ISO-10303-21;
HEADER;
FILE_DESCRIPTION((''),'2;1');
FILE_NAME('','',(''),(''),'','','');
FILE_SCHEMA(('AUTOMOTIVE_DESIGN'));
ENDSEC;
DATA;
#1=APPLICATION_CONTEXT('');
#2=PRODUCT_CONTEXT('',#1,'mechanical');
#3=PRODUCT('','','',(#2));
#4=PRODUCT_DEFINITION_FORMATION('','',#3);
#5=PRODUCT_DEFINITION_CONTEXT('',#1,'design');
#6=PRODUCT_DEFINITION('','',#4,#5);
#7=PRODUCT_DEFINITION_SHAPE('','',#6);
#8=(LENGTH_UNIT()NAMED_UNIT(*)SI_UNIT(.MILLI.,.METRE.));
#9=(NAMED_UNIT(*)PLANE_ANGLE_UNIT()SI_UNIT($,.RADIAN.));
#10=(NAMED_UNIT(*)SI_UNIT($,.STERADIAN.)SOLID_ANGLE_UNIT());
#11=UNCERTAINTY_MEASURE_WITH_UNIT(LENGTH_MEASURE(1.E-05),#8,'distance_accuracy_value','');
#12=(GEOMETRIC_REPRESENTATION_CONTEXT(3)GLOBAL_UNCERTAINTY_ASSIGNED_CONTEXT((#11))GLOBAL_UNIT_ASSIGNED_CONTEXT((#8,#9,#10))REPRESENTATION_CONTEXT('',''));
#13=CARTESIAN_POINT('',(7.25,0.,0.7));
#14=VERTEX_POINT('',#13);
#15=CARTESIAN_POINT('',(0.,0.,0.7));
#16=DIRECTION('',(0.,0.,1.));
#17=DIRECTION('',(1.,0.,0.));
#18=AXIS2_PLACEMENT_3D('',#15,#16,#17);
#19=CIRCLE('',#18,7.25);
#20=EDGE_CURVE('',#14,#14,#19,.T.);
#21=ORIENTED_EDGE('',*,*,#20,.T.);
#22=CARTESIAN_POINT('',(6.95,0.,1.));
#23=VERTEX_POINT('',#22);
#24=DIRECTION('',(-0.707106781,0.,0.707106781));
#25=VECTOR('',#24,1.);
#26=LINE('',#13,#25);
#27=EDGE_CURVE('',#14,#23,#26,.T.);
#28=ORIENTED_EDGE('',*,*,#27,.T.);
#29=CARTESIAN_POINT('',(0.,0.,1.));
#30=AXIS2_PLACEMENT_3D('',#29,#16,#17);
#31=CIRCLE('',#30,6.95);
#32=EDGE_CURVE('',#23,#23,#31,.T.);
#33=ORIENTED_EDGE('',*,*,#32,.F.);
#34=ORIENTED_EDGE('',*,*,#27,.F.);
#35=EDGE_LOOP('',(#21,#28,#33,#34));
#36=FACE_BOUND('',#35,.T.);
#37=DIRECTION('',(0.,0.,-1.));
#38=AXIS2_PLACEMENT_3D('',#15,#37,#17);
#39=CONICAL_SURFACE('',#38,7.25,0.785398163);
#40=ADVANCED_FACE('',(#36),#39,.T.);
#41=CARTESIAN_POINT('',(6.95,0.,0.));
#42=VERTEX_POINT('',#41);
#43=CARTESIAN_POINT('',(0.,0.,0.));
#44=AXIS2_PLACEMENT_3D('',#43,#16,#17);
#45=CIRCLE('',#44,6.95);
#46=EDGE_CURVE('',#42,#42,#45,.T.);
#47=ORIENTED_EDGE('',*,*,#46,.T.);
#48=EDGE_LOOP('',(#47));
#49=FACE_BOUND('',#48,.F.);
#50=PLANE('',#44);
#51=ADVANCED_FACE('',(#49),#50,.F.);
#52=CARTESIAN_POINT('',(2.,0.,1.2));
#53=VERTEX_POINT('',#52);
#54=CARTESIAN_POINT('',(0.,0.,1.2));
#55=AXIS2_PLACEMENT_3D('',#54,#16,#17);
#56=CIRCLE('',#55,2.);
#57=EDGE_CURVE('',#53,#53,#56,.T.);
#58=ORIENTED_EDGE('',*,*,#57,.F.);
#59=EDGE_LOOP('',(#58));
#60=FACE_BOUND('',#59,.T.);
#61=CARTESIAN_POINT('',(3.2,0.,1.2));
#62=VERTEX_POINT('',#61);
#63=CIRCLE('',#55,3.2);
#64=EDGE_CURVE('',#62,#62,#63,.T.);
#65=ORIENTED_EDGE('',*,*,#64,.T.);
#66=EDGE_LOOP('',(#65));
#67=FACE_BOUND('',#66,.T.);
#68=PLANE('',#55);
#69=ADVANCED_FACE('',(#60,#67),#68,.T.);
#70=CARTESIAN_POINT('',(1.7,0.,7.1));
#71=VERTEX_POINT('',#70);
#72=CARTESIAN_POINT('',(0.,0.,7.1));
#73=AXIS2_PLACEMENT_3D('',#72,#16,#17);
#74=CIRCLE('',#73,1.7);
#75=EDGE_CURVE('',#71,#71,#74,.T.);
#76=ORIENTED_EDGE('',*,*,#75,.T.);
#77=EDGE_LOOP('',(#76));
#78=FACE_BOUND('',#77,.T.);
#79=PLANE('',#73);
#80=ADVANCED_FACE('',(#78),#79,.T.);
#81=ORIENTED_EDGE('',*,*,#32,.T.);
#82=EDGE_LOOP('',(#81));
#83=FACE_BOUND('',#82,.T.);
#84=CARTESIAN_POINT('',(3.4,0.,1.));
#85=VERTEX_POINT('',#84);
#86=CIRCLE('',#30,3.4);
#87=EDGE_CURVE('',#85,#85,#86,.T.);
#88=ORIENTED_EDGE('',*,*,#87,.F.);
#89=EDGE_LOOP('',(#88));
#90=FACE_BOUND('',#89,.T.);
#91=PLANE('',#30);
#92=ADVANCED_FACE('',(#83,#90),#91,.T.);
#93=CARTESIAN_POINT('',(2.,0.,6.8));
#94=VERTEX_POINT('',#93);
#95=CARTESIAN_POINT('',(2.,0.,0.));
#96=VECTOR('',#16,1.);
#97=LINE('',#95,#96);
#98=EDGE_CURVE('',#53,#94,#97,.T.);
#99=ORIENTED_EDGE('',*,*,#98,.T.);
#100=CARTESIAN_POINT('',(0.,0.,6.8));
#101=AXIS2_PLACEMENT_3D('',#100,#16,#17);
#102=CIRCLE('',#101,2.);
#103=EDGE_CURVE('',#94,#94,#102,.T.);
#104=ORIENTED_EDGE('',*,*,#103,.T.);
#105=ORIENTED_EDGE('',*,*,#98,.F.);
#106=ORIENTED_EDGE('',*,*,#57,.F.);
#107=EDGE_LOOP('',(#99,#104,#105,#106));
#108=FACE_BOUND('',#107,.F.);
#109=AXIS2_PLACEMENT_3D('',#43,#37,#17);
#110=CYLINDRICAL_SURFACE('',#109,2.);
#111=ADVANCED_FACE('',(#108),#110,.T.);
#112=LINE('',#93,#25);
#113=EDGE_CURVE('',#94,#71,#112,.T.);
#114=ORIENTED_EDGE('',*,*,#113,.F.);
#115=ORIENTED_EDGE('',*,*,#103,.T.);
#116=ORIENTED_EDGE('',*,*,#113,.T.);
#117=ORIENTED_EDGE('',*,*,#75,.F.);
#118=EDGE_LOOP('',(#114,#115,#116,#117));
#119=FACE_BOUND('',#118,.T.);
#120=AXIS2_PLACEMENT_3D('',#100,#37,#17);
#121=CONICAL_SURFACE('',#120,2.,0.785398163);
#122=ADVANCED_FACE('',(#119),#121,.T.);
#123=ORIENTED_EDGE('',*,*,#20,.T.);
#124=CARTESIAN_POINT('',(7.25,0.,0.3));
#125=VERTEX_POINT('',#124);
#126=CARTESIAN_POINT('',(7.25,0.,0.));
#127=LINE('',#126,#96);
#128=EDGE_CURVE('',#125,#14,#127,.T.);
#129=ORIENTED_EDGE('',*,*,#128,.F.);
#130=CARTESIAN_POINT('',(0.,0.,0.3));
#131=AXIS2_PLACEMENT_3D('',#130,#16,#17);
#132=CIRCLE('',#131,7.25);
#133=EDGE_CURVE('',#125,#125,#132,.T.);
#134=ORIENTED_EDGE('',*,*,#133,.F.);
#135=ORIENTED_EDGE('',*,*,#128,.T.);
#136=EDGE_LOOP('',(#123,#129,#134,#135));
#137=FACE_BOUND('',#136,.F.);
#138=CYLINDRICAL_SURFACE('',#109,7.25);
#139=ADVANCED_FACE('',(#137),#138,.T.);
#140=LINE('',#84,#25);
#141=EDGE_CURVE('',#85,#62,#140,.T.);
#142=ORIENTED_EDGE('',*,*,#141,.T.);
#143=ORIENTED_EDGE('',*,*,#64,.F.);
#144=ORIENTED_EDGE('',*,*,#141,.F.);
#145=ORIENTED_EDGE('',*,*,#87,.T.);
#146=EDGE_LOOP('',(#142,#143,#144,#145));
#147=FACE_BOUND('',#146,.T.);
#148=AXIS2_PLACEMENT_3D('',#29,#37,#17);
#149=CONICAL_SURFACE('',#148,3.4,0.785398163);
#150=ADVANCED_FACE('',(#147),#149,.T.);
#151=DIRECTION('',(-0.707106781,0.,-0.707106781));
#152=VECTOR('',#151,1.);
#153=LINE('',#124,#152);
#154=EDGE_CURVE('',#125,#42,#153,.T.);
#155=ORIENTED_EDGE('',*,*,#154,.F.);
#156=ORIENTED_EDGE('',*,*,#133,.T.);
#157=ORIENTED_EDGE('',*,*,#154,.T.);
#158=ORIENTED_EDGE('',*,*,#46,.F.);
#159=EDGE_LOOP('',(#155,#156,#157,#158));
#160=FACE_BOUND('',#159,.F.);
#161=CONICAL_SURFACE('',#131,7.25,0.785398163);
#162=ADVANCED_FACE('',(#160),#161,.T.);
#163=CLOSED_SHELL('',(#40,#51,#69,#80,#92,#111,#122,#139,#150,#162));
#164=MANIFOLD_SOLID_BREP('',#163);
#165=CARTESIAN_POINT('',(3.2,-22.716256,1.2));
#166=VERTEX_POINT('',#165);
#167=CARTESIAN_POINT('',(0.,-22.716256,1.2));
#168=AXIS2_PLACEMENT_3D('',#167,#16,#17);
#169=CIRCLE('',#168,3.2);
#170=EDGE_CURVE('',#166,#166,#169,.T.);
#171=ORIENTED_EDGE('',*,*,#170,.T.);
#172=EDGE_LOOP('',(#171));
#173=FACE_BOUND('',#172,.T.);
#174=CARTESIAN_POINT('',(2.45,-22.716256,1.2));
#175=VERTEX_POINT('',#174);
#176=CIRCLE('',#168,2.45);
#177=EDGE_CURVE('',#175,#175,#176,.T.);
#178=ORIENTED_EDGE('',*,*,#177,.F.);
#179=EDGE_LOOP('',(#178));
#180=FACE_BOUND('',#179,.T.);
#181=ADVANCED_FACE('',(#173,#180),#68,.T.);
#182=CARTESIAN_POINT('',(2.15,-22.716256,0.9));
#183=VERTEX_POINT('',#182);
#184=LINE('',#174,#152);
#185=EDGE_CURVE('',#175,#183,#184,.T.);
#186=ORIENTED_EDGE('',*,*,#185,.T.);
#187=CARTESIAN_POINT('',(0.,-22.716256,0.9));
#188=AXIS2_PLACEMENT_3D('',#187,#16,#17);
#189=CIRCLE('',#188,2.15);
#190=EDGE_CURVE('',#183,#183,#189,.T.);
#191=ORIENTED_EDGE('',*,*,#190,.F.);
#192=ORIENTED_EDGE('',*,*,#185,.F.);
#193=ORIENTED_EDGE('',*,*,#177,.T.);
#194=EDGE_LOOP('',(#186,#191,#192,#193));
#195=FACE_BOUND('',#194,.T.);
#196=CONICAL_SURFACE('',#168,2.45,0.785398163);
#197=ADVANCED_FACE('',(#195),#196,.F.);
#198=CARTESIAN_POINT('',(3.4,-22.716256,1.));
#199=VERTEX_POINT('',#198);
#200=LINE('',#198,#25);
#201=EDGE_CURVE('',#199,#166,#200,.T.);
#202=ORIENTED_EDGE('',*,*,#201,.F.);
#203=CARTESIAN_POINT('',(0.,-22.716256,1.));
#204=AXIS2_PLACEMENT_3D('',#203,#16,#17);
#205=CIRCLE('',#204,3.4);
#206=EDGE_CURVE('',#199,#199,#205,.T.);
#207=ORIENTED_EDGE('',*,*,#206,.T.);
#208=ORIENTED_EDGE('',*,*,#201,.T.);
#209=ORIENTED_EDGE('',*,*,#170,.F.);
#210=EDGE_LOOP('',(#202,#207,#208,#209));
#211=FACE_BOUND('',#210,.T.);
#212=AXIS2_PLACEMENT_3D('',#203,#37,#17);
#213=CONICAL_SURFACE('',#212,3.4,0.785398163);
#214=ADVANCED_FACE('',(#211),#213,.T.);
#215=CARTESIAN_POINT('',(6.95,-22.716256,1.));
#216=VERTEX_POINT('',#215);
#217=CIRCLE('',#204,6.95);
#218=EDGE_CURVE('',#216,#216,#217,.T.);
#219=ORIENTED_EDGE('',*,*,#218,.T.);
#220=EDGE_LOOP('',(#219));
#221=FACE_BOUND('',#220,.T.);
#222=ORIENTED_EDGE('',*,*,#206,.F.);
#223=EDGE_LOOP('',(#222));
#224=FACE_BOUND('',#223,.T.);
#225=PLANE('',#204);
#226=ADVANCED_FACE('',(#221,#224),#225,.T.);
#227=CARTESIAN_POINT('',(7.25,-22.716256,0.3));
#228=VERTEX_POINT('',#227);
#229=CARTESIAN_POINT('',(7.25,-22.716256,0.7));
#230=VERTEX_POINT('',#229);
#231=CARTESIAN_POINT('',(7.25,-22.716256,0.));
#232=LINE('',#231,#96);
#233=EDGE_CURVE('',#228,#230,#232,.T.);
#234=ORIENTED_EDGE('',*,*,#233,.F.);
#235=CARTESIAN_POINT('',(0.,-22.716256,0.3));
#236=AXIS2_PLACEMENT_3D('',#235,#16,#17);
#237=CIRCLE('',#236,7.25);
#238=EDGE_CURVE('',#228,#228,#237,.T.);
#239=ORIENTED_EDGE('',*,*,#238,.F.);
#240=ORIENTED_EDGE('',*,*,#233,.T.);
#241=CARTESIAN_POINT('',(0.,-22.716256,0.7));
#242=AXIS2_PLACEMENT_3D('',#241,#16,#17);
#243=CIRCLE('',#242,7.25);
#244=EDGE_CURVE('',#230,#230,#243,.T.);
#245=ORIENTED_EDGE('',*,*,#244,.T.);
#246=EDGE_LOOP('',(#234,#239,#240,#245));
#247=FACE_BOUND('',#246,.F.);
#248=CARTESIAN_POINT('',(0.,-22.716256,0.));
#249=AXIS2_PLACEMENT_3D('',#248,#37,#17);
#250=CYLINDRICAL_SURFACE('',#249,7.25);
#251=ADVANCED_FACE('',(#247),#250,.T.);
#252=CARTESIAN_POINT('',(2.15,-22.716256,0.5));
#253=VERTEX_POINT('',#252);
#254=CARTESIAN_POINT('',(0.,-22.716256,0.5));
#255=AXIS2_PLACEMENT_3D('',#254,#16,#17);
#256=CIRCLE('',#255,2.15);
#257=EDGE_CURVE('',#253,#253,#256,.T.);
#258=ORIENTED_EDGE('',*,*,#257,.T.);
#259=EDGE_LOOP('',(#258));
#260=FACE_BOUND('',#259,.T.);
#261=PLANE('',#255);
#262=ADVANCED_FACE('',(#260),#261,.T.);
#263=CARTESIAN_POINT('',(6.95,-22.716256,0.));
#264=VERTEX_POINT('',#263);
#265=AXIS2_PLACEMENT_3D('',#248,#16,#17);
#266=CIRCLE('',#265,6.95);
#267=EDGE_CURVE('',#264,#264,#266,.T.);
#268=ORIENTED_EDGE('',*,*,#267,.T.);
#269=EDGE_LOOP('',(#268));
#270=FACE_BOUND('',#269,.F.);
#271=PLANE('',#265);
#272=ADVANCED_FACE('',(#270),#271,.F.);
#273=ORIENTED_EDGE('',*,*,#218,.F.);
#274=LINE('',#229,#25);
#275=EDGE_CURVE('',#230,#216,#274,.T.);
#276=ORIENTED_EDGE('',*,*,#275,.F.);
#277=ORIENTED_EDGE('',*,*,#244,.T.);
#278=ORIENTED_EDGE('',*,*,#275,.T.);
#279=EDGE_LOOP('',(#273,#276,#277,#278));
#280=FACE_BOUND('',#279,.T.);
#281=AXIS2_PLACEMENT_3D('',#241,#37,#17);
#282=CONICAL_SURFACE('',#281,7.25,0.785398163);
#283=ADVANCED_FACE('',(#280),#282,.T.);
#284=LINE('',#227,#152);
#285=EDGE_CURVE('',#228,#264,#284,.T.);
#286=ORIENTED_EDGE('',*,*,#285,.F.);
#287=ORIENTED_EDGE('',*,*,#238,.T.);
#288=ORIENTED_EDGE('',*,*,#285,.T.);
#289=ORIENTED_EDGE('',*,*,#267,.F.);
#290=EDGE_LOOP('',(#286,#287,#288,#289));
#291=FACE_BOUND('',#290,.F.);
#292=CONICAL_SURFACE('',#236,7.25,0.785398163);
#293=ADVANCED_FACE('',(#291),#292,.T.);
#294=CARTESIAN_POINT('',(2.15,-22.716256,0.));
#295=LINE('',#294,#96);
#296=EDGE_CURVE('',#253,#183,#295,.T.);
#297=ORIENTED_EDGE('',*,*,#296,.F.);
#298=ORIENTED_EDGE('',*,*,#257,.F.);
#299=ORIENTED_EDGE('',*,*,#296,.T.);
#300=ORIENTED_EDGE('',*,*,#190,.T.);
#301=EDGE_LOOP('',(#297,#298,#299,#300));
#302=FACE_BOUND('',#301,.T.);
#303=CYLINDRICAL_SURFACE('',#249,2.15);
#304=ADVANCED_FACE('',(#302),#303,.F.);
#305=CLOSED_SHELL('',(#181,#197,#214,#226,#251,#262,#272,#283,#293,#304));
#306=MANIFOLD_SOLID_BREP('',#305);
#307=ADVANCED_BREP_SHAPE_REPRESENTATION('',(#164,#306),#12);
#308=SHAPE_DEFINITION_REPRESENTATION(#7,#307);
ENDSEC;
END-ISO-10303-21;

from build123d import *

# Parameters (mm, degrees)
F0_R     = 7.25
F0_R_2   = 3.1
F1_DEPTH = 1
F0_R_3   = 2
F2_DEPTH = 1.2
F0_R_4   = 2.15
F3_DEPTH = 7.1
F4_DEPTH = 0.5


# Not quite as in the source:
# - a fillet or chamfer that OpenCascade refuses, or shapes differently, is made with other operations: its cross-section is extruded or revolved along the edge and cut away or added


with BuildPart() as f1:
    # F0 (on Top) → F1 (new body)
    with BuildSketch(Plane.XY):
        Circle(F0_R)
        Circle(F0_R_2, mode=Mode.SUBTRACT)
    extrude(amount=F1_DEPTH)

    # F0 (on Top) → F2 (join)
    with BuildSketch(Plane.XY):
        Circle(F0_R_2)
        Circle(F0_R_3, mode=Mode.SUBTRACT)
    extrude(amount=F2_DEPTH)

    # F0 (on Top) → F3 (join)
    with BuildSketch(Plane.XY):
        Circle(F0_R_3)
    extrude(amount=F3_DEPTH)

    # F5#2: chamfer of 0.3 on 4 edges, made by hand


with BuildPart() as f1b:
    # F0 (on Top) → F1, piece 2 (new body)
    with BuildSketch(Plane.XY):
        with Locations((0, -22.7162558585)):
            Circle(F0_R)
        with Locations((0, -22.7162558585)):
            Circle(F0_R_2, mode=Mode.SUBTRACT)
    extrude(amount=F1_DEPTH)

    # F0 (on Top) → F2, piece 2 (join)
    with BuildSketch(Plane.XY):
        with Locations((0, -22.7162558585)):
            Circle(F0_R_2)
        with Locations((0, -22.7162558585)):
            Circle(F0_R_4, mode=Mode.SUBTRACT)
    extrude(amount=F2_DEPTH)

    # F0 (on Top) → F4 (join)
    with BuildSketch(Plane.XY):
        with Locations((0, -22.7162558585)):
            Circle(F0_R_4)
    extrude(amount=F4_DEPTH)

    # F5: chamfer of 0.3 on 4 edges, made by hand


with BuildPart() as f5_tool2:
    # F5_s3 → F5_t4 (revolve)
    with BuildSketch(Plane.XZ.offset(22.7162558585)):
        Polygon((3.4, 1), (3.1, 1.3), (3.1, 1), align=None)
    revolve(axis=Axis((0, -22.7162558585, 1), (0, 0, 1)))

    split(bisect_by=Plane.XY.offset(1.2), keep=Keep.BOTTOM)


with BuildPart() as f1b_1:
    add(f1b.part)

    # F5_t1: union F5_tool2
    add(f5_tool2.part)

    # F5_s6 → F5_t7 (revolve, cut)
    with BuildSketch(Plane.XZ.offset(22.7162558585)):
        Polygon((7.25, 0.3), (6.95, 0), (7.25, 0), align=None)
    revolve(axis=Axis((0, -22.7162558585, 0), (0, 0, 1)), mode=Mode.SUBTRACT)

    # F5_s8 → F5_t9 (revolve, cut)
    with BuildSketch(Plane.XZ.offset(22.7162558585)):
        Polygon((7.25, 0.7), (6.95, 1), (7.25, 1), align=None)
    revolve(axis=Axis((0, -22.7162558585, 1), (0, 0, 1)), mode=Mode.SUBTRACT)

    # F5_s10 → F5_t11 (revolve, cut)
    with BuildSketch(Plane.XZ.offset(22.7162558585)):
        Polygon((2.45, 1.2), (2.15, 0.9), (2.15, 1.2), align=None)
    revolve(axis=Axis((0, -22.7162558585, 1.2), (0, 0, 1)), mode=Mode.SUBTRACT)


with BuildPart() as f5_2_tool2:
    # F5_2_s3 → F5_2_t4 (revolve)
    with BuildSketch(Plane.XZ):
        Polygon((3.4, 1), (3.1, 1.3), (3.1, 1), align=None)
    revolve(axis=Axis((0, 0, 1), (0, 0, 1)))

    split(bisect_by=Plane.XY.offset(1.2), keep=Keep.BOTTOM)


with BuildPart() as f1_1:
    add(f1.part)

    # F5_2_t1: union F5_2_tool2
    add(f5_2_tool2.part)

    # F5_2_s6 → F5_2_t7 (revolve, cut)
    with BuildSketch(Plane.XZ):
        Polygon((7.25, 0.3), (6.95, 0), (7.25, 0), align=None)
    revolve(axis=Axis((0, 0, 0), (0, 0, 1)), mode=Mode.SUBTRACT)

    # F5_2_s8 → F5_2_t9 (revolve, cut)
    with BuildSketch(Plane.XZ):
        Polygon((7.25, 0.7), (6.95, 1), (7.25, 1), align=None)
    revolve(axis=Axis((0, 0, 1), (0, 0, 1)), mode=Mode.SUBTRACT)

    # F5_2_s10 → F5_2_t11 (revolve, cut)
    with BuildSketch(Plane.XZ):
        Polygon((2, 6.8), (1.7, 7.1), (2, 7.1), align=None)
    revolve(axis=Axis((0, 0, 7.1), (0, 0, 1)), mode=Mode.SUBTRACT)


solid = Compound([f1b_1.part, f1_1.part])
